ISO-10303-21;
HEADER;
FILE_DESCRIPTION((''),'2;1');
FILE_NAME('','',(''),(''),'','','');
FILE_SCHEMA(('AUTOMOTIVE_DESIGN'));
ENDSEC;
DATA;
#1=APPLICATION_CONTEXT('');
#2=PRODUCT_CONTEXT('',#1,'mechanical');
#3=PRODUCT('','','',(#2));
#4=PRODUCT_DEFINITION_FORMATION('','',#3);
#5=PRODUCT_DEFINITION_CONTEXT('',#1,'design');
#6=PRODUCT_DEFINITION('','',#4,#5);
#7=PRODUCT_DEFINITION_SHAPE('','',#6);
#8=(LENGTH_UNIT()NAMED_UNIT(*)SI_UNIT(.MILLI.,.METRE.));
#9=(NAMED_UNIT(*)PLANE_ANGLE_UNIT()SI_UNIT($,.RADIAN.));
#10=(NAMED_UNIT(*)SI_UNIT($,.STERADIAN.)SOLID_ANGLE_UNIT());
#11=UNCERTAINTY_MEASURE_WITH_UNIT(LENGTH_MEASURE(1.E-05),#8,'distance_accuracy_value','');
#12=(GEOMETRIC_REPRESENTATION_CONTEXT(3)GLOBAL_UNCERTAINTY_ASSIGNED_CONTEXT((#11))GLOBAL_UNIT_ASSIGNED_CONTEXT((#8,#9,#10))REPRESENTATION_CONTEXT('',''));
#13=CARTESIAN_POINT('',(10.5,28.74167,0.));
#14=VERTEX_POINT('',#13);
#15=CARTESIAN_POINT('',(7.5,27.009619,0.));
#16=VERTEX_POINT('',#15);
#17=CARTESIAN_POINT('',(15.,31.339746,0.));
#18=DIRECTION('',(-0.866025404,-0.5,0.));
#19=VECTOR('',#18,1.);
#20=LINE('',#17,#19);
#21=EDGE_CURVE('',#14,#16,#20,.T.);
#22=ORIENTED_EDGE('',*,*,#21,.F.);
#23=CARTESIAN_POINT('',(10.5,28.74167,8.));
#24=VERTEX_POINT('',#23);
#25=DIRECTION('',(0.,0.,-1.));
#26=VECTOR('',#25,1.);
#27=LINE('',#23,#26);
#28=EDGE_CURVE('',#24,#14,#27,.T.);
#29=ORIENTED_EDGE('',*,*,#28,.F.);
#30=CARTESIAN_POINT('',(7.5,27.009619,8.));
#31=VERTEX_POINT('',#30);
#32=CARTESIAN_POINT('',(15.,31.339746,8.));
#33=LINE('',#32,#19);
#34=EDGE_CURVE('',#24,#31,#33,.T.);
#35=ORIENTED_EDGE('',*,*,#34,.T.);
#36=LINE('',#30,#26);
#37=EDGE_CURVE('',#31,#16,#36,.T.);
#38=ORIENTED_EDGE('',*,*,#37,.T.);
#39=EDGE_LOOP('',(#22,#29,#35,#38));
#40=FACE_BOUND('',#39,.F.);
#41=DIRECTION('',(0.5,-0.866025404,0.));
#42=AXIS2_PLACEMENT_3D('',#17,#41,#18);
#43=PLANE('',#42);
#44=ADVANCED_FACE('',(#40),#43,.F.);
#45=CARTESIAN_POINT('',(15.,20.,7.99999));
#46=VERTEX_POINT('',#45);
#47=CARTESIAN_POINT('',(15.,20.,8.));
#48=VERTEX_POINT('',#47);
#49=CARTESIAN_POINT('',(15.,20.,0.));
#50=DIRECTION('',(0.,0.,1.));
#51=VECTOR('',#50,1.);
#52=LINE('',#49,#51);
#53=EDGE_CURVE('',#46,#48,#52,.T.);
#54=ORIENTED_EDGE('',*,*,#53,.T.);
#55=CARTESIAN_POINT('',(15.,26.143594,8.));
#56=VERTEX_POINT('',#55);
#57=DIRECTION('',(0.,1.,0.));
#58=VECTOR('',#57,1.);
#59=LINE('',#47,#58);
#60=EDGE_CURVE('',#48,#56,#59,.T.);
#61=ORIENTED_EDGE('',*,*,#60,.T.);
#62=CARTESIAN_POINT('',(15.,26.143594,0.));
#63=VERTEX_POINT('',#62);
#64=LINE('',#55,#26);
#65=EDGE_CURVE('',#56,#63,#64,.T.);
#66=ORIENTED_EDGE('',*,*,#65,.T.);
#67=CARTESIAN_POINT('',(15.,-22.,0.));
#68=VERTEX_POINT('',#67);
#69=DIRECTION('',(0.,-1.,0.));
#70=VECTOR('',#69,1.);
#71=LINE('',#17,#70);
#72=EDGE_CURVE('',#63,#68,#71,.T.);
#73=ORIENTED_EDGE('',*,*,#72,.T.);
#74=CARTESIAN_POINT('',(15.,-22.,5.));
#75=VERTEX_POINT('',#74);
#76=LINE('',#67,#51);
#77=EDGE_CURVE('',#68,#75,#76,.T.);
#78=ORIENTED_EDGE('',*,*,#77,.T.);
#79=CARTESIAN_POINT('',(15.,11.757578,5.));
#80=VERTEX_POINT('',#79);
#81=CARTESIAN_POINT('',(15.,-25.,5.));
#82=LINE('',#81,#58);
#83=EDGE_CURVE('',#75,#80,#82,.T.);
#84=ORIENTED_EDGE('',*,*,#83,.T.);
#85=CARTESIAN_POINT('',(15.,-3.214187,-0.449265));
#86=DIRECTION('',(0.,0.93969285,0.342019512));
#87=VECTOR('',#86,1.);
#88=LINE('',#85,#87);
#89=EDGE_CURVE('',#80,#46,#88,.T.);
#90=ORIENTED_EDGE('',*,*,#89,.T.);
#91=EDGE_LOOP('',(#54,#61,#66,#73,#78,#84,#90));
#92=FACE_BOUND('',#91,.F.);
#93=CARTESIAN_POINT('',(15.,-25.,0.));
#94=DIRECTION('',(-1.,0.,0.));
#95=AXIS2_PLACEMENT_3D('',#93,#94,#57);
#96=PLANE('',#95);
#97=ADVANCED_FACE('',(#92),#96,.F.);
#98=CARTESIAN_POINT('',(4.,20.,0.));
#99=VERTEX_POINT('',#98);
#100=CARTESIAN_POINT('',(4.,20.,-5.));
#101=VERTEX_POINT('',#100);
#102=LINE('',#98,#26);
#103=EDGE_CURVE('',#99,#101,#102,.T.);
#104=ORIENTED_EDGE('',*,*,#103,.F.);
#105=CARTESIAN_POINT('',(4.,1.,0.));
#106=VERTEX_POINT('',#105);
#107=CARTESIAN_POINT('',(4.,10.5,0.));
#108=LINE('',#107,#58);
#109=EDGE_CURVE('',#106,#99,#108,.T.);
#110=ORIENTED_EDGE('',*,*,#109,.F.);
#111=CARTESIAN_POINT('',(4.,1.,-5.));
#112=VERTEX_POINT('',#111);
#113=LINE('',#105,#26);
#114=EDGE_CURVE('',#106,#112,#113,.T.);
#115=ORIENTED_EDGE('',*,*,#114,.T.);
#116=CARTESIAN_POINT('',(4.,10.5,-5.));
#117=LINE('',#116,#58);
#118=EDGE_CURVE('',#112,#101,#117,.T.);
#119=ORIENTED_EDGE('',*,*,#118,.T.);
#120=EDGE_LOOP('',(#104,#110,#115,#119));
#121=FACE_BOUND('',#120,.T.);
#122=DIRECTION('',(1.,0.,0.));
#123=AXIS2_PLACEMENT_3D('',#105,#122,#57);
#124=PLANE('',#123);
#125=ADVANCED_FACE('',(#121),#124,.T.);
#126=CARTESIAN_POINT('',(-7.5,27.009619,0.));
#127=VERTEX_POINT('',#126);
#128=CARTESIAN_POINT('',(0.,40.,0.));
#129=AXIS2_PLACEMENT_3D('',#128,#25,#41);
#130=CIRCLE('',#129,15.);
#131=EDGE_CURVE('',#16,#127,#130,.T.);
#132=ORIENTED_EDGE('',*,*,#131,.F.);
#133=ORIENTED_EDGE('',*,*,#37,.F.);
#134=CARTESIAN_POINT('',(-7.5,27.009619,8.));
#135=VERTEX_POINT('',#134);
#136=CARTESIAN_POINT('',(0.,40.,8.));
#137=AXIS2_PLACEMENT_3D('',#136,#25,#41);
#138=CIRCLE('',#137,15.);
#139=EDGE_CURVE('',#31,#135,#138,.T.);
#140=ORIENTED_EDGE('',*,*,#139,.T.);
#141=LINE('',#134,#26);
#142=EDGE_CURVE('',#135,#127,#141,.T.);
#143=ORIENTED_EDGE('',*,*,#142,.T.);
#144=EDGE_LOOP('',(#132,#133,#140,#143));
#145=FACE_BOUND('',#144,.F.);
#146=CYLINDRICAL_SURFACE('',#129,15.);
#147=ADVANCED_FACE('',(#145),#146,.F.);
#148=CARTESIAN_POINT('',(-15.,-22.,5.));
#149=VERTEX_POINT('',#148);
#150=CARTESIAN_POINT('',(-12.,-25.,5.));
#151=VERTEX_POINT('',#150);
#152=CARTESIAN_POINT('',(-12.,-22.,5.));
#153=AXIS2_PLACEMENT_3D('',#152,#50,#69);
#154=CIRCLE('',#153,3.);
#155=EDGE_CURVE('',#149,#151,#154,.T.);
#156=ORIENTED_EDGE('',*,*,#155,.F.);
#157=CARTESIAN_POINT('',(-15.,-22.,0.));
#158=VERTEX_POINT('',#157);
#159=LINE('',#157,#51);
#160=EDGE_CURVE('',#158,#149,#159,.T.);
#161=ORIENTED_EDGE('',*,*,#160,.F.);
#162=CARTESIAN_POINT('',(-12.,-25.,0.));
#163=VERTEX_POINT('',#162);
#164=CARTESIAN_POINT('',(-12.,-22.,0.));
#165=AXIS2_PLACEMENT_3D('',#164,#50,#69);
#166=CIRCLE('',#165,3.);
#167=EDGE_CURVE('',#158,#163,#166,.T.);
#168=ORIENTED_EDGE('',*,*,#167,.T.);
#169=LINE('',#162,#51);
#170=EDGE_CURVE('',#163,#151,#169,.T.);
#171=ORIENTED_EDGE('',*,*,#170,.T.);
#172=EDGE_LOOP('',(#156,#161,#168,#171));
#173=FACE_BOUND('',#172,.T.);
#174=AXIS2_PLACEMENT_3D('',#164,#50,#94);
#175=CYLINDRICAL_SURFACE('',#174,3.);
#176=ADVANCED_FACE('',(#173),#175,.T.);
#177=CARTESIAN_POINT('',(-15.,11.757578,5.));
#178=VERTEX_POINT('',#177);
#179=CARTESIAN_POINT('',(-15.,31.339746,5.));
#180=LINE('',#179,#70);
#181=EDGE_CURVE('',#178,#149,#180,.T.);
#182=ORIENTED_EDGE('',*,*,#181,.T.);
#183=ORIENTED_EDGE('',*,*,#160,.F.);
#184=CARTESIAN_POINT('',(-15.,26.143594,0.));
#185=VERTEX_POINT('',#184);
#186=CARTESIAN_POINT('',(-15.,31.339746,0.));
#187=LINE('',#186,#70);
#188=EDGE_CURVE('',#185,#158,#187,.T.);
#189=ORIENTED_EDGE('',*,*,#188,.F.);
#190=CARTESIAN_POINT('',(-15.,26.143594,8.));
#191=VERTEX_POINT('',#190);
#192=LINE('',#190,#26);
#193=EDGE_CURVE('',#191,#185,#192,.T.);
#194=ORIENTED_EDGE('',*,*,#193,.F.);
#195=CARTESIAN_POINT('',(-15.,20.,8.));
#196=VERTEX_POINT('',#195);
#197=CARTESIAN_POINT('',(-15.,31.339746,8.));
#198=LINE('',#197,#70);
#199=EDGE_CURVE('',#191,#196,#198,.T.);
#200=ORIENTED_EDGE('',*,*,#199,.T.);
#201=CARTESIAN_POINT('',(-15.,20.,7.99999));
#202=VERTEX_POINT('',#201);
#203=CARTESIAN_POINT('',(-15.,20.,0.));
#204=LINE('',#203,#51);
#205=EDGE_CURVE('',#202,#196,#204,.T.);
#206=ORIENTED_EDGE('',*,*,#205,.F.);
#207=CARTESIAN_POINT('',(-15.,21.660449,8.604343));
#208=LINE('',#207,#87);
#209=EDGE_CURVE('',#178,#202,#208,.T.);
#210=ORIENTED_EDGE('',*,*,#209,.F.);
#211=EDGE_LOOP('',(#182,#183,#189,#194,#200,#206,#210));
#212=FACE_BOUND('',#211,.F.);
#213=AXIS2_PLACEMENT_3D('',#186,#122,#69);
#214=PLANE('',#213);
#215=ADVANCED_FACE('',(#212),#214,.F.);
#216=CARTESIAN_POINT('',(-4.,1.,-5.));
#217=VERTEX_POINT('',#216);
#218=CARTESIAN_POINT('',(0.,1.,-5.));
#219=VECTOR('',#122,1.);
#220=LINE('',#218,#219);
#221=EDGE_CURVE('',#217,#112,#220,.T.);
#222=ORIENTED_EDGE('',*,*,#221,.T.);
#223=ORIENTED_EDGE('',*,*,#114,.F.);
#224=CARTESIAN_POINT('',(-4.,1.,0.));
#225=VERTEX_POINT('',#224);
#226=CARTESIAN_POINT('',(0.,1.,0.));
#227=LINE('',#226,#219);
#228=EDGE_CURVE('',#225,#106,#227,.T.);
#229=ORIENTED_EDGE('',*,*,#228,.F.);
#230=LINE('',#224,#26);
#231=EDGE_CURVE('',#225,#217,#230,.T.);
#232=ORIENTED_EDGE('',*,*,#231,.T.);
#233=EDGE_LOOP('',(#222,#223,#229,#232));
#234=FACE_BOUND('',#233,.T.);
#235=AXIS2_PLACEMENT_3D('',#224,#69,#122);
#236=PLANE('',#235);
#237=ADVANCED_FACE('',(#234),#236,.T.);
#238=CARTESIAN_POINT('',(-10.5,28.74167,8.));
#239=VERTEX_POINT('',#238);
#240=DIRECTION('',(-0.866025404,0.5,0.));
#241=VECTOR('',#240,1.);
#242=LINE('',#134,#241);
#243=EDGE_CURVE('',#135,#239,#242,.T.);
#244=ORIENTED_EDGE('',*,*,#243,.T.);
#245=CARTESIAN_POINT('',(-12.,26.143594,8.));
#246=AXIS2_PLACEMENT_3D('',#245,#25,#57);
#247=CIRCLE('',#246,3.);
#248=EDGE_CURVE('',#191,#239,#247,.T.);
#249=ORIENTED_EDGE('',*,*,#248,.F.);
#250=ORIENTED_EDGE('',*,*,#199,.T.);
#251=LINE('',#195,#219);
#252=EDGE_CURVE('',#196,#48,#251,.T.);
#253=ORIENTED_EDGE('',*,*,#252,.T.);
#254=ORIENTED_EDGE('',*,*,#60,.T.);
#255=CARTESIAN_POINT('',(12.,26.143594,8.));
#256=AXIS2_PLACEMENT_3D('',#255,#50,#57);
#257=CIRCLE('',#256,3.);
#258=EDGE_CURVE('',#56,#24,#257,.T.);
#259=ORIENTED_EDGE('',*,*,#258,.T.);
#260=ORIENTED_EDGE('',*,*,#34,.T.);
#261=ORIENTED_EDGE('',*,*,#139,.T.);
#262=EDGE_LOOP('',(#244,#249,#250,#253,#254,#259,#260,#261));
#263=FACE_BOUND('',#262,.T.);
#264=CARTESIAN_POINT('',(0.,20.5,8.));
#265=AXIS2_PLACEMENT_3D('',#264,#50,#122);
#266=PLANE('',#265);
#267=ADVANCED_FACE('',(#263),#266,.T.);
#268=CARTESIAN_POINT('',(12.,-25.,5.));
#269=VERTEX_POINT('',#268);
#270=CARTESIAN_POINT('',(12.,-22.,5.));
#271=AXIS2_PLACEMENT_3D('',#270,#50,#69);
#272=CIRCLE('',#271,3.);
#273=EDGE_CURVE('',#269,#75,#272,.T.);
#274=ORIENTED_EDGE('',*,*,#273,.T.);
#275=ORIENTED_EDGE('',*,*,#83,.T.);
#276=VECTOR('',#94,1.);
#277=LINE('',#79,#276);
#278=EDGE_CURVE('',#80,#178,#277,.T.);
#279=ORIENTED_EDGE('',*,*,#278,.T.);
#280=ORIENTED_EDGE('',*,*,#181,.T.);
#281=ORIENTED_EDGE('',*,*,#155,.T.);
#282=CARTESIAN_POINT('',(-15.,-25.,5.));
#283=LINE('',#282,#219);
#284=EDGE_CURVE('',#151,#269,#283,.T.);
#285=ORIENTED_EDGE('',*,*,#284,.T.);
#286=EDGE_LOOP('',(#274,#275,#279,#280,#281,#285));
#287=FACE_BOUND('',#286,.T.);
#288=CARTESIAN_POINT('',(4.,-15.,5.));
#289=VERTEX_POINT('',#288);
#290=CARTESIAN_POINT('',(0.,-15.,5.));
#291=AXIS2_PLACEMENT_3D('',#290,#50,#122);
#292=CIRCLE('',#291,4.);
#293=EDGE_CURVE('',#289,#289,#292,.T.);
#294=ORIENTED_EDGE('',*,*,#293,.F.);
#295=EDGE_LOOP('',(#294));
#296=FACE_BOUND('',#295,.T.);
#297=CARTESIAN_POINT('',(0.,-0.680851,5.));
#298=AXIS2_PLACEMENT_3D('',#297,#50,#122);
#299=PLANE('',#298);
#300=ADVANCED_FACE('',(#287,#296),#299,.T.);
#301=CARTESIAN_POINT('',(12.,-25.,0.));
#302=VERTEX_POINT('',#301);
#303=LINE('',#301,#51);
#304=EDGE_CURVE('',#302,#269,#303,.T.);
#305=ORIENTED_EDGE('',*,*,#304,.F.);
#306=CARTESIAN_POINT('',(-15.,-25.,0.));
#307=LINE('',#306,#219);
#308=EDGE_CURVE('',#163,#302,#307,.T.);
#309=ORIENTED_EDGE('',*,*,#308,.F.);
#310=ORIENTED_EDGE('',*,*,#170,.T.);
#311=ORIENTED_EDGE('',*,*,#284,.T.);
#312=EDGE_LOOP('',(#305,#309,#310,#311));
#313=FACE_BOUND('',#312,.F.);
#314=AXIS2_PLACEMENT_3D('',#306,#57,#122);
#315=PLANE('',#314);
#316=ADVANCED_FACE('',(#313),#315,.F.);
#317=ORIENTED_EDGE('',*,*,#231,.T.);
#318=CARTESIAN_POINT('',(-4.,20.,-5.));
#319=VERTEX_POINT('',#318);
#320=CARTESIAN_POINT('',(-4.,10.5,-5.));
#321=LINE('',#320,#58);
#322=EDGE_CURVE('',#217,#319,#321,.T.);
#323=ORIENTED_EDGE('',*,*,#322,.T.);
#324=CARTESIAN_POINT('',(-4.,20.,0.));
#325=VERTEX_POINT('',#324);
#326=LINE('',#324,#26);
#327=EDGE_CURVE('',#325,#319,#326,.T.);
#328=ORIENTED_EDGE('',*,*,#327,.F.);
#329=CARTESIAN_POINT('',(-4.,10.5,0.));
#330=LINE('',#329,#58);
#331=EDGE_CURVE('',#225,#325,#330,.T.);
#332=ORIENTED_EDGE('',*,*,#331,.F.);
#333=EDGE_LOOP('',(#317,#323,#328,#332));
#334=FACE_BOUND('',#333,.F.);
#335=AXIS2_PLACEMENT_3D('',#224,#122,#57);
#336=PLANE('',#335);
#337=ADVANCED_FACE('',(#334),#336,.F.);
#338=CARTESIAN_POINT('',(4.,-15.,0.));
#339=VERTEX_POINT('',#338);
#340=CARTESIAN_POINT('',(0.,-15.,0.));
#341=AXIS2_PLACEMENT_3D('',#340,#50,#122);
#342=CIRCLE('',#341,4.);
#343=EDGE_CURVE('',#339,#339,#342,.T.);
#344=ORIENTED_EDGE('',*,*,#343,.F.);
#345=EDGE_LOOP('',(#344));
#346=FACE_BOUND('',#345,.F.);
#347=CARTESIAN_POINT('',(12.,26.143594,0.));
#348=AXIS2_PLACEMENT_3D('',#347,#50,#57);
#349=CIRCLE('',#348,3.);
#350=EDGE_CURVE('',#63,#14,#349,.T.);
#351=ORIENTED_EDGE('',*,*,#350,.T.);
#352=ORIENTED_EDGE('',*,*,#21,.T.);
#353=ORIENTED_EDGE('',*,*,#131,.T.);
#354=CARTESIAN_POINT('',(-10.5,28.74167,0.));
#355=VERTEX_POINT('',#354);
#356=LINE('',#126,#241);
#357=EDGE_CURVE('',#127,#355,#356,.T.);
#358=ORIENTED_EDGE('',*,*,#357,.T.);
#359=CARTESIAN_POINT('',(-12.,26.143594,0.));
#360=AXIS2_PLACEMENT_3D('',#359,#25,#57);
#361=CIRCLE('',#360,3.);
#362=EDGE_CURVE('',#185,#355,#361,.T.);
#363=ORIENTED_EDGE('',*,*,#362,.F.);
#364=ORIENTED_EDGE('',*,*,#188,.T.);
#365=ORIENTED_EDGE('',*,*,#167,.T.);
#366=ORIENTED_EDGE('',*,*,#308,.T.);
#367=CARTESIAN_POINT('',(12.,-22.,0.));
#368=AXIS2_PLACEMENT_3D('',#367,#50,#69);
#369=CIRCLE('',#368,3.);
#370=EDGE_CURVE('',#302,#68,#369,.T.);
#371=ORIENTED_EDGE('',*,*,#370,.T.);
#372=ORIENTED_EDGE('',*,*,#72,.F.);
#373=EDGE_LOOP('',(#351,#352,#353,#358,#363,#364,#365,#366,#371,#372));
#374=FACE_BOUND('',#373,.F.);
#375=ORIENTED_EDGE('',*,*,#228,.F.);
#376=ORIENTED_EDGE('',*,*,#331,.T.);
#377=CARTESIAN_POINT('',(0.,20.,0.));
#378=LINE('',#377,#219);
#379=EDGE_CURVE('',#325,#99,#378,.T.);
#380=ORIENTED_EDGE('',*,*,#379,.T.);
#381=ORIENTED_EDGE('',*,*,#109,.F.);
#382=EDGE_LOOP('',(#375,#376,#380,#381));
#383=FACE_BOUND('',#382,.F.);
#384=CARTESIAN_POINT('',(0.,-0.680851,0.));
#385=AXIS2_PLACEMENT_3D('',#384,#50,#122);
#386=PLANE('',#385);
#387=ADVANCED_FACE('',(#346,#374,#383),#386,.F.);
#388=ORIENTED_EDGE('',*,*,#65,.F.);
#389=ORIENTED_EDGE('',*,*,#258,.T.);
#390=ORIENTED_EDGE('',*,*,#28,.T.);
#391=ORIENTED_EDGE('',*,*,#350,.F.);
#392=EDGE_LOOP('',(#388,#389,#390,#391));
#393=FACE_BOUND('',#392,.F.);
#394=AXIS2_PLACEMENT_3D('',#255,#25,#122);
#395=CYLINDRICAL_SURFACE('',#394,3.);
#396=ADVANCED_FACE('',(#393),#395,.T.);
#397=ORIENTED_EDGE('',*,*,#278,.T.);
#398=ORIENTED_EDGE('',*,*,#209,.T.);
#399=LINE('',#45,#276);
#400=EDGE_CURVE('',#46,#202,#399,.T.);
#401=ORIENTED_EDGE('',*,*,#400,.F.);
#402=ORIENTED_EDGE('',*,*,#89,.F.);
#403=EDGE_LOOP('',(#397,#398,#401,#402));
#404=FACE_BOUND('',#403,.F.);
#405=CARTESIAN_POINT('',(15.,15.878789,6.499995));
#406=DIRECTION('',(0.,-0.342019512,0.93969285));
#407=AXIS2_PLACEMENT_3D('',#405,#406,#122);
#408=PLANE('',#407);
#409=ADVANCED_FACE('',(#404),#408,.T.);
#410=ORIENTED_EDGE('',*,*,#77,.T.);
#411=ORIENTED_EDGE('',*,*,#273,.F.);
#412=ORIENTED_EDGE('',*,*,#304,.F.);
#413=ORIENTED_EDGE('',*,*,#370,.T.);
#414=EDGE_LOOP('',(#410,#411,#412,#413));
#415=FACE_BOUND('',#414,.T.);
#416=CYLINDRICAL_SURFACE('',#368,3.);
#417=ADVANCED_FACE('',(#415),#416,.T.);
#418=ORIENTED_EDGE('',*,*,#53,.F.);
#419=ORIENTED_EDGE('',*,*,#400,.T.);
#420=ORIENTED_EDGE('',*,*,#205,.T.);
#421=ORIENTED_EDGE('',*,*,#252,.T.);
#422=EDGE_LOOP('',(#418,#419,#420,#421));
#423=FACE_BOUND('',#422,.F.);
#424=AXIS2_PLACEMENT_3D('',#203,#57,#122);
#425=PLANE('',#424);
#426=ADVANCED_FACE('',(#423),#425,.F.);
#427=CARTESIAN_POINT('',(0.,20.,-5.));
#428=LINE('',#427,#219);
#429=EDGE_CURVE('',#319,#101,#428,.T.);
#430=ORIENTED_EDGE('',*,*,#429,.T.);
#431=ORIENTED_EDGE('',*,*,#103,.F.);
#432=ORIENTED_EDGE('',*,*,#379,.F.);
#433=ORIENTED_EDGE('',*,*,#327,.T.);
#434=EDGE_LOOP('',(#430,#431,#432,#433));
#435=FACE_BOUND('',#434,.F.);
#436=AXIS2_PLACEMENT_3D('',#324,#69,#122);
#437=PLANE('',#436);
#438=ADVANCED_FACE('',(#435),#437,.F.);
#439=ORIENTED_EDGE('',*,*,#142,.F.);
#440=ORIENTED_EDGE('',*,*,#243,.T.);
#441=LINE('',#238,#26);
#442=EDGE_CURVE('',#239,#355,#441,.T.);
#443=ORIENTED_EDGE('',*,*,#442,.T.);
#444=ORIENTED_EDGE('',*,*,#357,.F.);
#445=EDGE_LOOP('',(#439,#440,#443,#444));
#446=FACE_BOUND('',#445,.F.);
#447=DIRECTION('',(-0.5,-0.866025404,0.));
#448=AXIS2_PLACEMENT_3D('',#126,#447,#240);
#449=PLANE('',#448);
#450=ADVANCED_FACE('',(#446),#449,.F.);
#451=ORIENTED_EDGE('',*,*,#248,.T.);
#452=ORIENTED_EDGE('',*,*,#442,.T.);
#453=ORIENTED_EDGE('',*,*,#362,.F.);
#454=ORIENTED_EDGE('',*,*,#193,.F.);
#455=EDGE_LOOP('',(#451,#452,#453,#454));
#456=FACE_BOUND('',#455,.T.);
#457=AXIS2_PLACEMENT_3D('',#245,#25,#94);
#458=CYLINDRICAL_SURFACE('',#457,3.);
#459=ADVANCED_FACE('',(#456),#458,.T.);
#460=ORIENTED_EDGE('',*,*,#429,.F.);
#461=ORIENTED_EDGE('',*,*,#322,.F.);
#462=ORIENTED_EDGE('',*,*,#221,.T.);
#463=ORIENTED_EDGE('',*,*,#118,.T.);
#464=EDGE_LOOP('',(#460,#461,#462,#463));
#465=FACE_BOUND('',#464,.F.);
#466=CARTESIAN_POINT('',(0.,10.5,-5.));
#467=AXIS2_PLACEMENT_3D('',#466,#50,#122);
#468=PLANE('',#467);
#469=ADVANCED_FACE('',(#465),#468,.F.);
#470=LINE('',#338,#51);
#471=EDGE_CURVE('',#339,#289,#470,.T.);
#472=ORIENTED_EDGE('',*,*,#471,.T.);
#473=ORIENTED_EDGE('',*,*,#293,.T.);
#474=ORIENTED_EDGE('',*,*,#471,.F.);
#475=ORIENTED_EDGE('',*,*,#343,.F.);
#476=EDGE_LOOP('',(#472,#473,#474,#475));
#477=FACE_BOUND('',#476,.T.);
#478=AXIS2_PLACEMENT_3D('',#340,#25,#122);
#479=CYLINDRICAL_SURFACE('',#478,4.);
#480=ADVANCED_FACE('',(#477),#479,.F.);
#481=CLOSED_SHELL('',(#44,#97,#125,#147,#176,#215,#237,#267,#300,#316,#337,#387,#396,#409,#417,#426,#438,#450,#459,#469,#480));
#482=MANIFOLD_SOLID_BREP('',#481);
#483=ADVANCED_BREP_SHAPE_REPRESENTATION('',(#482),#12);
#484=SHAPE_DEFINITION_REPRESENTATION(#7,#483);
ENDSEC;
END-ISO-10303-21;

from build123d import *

# Parameters (mm, degrees)
F0_R     = 4
F0_W     = 8
F0_H     = 19
F1_DEPTH = 5
F0_H_2   = 1
F2_DEPTH = 8
F3_DEPTH = 5
F4_R     = 3
F5_SIZE2 = 2.99999
F5_SIZE  = 8.242422


# Not quite as in the source:
# - a fillet or chamfer is up to 0.001 mm smaller than in the source, because OpenCascade refuses the exact size


with BuildPart() as f1:
    # F0 (on Top) → F1 (new body)
    with BuildSketch(Plane.XY):
        Polygon((-15, 20), (-15, -25), (15, -25), (15, 20), (4, 20), (4, 1), (-4, 1), (-4, 20), align=None)
        with Locations((0, -15)):
            Circle(F0_R, mode=Mode.SUBTRACT)
        with Locations((0, 10.5)):
            Rectangle(F0_W, F0_H)
        with BuildLine():
            Line((-15, 25), (-15, 20))
            Line((-15, 20), (-4, 20))
            Line((-4, 20), (-4, 21))
            Line((-4, 21), (4, 21))
            Line((4, 21), (4, 20))
            Line((4, 20), (15, 20))
            Line((15, 20), (15, 25))
            Line((15, 25), (15, 31.3397459622))
            Line((15, 31.3397459622), (7.5, 27.0096189432))
            ThreePointArc((7.5, 27.0096189432), (0, 25), (-7.5, 27.0096189432))
            Line((-7.5, 27.0096189432), (-15, 31.3397459622))
            Line((-15, 31.3397459622), (-15, 25))
        make_face()
    extrude(amount=F1_DEPTH)

    # F0 (on Top) → F2 (join)
    with BuildSketch(Plane.XY):
        with Locations((0, 20.5)):
            Rectangle(F0_W, F0_H_2)
        with BuildLine():
            Line((-15, 25), (-15, 20))
            Line((-15, 20), (-4, 20))
            Line((-4, 20), (-4, 21))
            Line((-4, 21), (4, 21))
            Line((4, 21), (4, 20))
            Line((4, 20), (15, 20))
            Line((15, 20), (15, 25))
            Line((15, 25), (15, 31.3397459622))
            Line((15, 31.3397459622), (7.5, 27.0096189432))
            ThreePointArc((7.5, 27.0096189432), (0, 25), (-7.5, 27.0096189432))
            Line((-7.5, 27.0096189432), (-15, 31.3397459622))
            Line((-15, 31.3397459622), (-15, 25))
        make_face()
    extrude(amount=F2_DEPTH)

    # F0 (on Top) → F3 (join)
    with BuildSketch(Plane.XY):
        with Locations((0, 10.5)):
            Rectangle(F0_W, F0_H)
    extrude(amount=-F3_DEPTH)

    # F4
    f4_edges = [f1.edges().sort_by_distance(p)[0] for p in [
        (-15, 31.339746, 4),
        (15, 31.339746, 4),
        (-15, -25, 2.5),
        (15, -25, 2.5),
    ]]
    fillet(f4_edges, radius=F4_R)

    # F5 (size 8.2424322584 and 3 in the source; OpenCascade refuses exactly that, so slightly less here)
    f5_edges = [f1.edges().sort_by_distance(p)[0] for p in [
        (0, 20, 5),
    ]]
    f5_side = f1.faces().sort_by_distance((0, -1.950066, 5))[0]
    chamfer(f5_edges, length=F5_SIZE, length2=F5_SIZE2, reference=f5_side)


solid = f1.part
